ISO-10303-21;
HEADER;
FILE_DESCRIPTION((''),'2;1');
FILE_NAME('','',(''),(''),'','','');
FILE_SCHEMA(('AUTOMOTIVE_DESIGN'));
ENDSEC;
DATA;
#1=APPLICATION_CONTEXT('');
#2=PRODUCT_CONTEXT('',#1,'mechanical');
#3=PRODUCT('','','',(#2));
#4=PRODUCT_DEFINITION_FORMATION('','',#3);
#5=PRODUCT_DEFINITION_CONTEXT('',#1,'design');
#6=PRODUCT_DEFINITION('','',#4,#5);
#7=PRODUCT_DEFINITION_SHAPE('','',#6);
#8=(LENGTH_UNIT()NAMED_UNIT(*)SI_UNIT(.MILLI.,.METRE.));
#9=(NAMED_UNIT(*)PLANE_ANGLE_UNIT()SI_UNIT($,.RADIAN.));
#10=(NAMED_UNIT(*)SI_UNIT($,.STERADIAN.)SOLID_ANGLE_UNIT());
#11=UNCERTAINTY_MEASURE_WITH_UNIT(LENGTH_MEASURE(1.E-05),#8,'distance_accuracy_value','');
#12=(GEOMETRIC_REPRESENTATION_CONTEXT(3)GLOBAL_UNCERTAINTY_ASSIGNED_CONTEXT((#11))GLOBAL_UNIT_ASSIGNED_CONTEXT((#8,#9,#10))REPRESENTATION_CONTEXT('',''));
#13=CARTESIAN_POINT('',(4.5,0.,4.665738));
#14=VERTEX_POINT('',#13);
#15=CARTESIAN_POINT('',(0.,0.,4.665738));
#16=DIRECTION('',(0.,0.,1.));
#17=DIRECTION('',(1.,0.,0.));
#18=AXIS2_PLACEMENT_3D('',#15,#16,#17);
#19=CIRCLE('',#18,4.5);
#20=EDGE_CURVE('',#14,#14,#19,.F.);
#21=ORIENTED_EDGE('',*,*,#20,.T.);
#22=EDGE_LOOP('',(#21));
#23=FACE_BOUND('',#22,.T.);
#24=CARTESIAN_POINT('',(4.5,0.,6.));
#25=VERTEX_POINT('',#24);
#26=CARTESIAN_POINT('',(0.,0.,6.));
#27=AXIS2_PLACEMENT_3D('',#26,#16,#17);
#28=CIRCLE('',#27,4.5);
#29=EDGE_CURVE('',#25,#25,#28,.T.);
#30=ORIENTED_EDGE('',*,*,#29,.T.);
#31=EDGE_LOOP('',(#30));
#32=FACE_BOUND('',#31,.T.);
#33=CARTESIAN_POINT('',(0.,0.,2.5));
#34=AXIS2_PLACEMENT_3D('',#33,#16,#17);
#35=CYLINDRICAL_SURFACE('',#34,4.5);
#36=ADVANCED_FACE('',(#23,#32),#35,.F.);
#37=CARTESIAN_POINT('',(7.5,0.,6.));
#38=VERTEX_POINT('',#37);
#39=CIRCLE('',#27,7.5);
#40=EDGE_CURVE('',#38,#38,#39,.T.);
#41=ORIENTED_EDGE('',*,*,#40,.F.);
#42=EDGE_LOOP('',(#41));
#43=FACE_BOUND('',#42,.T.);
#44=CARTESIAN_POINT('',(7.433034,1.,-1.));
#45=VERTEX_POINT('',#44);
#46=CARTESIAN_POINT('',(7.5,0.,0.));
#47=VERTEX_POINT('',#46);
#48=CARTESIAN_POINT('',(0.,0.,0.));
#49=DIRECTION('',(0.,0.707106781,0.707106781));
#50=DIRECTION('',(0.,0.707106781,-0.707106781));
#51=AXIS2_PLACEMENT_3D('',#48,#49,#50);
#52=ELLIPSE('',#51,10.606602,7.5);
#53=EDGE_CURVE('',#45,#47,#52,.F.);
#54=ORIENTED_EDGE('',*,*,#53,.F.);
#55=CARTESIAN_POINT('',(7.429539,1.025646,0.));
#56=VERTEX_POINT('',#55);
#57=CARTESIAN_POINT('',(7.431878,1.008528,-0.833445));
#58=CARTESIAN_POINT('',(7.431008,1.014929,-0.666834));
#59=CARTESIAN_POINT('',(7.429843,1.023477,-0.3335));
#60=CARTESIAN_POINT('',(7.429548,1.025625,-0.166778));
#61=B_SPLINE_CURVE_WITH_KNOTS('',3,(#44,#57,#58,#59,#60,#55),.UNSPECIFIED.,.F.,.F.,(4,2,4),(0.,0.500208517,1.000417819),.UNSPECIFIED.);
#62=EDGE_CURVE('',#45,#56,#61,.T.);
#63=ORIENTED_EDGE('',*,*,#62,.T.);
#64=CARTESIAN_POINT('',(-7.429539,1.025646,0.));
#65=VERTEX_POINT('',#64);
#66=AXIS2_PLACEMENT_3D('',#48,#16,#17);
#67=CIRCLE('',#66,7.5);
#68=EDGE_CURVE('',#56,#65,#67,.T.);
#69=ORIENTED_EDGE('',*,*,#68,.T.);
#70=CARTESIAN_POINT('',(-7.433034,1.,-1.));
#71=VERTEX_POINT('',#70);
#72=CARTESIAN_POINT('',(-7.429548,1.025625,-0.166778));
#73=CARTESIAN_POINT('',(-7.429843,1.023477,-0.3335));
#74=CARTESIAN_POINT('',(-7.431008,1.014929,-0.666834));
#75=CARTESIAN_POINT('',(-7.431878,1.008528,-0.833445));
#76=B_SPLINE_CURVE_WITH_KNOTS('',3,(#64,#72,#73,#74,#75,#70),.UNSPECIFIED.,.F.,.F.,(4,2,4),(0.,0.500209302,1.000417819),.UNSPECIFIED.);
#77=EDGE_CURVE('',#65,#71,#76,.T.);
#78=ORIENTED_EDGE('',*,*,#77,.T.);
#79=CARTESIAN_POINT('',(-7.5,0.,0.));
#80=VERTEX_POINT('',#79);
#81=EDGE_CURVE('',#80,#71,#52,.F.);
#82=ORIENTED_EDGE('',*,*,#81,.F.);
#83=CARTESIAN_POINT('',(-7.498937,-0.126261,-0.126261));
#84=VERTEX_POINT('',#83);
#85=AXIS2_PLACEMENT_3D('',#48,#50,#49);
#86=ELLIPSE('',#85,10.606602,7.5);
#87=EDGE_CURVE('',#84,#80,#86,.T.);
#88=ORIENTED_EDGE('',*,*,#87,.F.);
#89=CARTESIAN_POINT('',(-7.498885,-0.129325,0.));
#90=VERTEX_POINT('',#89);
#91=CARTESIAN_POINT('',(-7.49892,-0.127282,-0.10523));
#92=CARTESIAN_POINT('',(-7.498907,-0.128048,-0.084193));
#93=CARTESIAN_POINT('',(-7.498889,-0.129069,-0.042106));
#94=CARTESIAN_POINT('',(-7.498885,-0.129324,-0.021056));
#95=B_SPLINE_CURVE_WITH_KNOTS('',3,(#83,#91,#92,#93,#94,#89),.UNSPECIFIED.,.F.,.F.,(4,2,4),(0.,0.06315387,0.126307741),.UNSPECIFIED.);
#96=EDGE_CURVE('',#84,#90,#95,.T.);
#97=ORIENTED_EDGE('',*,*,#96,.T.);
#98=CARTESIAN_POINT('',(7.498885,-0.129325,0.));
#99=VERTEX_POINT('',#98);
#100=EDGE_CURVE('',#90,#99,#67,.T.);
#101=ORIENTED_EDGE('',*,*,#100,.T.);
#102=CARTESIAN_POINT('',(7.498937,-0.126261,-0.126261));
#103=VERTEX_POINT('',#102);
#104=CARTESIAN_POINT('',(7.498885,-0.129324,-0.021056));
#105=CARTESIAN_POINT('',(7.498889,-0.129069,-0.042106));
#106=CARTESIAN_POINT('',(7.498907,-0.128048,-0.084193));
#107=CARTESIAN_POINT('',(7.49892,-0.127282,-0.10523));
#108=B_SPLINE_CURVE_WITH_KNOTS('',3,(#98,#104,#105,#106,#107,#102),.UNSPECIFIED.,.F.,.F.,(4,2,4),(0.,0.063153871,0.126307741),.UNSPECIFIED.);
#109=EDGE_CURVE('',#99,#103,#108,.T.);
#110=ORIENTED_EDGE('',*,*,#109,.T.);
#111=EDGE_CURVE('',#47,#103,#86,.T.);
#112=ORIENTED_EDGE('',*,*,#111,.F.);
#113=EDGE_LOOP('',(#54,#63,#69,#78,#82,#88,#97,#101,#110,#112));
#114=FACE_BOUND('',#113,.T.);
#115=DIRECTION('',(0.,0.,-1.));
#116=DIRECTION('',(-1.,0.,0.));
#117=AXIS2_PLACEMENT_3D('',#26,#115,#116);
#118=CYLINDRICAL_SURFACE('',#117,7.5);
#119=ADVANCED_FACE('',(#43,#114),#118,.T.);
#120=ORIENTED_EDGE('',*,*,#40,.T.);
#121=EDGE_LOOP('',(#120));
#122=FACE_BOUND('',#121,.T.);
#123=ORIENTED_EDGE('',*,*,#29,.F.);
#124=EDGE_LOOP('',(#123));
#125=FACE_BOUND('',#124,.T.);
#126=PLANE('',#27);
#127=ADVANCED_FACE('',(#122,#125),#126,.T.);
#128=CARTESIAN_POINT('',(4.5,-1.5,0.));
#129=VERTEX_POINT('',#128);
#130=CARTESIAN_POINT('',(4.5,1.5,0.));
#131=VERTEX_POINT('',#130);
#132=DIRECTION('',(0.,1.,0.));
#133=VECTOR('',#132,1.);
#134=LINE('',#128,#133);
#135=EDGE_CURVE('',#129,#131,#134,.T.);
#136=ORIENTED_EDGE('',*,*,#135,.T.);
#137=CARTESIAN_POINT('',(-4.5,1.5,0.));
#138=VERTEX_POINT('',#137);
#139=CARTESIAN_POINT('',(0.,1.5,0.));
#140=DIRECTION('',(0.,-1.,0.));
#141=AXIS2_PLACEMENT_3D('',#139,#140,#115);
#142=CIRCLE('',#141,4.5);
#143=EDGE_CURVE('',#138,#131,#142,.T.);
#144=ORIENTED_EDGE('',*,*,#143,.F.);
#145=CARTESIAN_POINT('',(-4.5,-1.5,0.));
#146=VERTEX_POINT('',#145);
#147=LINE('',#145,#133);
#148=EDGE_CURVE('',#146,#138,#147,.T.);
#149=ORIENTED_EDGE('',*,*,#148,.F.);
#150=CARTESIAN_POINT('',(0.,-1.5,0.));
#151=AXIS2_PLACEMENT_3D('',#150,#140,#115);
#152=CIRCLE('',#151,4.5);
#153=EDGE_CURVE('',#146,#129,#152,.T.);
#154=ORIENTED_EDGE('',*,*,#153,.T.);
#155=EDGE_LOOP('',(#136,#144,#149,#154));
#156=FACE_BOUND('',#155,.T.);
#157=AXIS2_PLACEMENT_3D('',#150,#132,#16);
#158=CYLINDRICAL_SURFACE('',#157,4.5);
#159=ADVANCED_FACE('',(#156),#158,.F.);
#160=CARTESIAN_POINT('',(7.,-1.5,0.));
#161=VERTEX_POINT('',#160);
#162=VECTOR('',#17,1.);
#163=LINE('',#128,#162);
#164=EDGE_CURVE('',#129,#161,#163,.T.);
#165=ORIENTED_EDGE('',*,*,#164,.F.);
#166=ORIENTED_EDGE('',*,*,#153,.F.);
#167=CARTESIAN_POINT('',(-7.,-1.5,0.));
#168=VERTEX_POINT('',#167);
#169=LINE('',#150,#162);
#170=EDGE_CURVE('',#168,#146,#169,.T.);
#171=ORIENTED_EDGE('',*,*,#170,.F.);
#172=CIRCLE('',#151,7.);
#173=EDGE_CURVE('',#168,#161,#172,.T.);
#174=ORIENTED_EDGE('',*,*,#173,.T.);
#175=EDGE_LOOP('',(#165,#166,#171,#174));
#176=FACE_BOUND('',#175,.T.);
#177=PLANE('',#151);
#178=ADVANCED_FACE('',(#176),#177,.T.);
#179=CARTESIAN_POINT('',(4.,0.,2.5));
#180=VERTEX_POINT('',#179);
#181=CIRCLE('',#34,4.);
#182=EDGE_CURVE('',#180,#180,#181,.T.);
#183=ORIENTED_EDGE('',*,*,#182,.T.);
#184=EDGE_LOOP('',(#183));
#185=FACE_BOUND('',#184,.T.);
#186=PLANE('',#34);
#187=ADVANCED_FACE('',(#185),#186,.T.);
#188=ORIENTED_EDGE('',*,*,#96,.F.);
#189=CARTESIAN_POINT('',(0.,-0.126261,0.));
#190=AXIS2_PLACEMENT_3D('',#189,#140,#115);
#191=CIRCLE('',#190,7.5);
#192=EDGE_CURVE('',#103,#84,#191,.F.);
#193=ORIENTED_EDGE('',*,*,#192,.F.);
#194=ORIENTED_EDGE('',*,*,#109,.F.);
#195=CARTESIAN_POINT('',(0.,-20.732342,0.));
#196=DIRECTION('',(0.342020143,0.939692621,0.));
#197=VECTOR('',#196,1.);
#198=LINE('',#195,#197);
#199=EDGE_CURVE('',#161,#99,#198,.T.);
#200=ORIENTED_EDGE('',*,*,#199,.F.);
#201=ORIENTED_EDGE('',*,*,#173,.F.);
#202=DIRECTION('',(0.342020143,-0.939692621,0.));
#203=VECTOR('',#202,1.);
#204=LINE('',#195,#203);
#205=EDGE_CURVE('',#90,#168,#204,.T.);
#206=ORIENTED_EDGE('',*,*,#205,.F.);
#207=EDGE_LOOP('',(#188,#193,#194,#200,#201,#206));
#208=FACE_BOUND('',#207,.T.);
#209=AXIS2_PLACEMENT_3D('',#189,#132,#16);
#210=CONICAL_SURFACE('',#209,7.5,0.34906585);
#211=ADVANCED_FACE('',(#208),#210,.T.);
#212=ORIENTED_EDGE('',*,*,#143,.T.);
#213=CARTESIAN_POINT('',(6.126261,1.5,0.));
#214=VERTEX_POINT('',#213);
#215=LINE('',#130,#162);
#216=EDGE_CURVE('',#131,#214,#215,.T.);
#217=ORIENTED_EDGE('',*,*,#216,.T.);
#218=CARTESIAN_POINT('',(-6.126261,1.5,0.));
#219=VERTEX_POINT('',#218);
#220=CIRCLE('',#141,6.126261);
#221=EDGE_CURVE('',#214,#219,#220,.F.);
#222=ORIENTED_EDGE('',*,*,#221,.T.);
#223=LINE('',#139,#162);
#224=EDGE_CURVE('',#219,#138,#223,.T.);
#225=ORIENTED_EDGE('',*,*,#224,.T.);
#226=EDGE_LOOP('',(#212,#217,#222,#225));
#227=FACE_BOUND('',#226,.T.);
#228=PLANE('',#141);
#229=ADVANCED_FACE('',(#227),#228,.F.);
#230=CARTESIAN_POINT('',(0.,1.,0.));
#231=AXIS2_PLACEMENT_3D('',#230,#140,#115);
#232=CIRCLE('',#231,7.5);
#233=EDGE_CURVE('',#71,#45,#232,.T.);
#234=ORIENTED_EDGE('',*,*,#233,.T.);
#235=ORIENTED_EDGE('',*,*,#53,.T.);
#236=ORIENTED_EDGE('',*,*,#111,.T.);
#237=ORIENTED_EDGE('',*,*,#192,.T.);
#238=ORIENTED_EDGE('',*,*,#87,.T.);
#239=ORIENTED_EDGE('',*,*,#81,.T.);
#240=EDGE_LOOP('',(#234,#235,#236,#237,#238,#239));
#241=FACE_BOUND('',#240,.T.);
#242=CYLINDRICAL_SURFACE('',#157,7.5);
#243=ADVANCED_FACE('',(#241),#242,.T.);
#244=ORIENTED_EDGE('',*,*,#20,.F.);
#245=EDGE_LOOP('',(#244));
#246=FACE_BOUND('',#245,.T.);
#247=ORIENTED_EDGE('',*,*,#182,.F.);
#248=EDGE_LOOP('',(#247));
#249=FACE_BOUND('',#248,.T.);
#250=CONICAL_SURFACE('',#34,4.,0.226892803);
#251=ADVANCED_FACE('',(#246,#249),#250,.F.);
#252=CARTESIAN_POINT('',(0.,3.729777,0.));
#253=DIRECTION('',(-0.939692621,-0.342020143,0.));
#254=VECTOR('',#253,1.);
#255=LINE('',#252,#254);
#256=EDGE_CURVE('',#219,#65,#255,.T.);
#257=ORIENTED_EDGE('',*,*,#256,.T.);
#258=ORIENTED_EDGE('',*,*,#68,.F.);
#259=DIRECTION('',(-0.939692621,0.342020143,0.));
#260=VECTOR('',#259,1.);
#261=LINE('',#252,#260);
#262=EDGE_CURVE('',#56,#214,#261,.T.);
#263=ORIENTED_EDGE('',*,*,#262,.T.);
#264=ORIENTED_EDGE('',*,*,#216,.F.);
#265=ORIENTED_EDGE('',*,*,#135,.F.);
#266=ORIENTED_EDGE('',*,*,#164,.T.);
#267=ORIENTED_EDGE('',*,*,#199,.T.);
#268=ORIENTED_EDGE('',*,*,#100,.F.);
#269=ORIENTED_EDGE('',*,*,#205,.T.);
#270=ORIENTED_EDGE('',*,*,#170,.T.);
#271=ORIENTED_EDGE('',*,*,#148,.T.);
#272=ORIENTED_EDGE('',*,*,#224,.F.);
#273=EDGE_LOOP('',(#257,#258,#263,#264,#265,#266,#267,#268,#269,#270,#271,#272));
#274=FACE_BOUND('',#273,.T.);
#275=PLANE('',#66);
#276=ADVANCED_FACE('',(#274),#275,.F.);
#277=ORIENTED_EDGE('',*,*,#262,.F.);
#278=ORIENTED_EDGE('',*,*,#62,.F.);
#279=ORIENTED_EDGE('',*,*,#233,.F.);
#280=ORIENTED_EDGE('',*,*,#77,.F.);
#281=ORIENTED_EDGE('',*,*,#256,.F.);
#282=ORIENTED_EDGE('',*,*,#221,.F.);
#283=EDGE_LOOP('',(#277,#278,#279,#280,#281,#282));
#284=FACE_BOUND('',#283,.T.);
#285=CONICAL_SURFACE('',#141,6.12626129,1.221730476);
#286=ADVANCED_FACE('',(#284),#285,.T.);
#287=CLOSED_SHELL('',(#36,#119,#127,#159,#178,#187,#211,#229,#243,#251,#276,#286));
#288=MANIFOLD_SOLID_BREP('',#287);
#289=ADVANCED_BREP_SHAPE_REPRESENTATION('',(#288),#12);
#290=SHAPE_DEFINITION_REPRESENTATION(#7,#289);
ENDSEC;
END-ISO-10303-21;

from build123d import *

# Parameters (mm, degrees)
SKETCH1_R                = 7.5
BOSS_EXTRUDE1_DEPTH      = 6
SKETCH2_R                = 4.5
CUT_EXTRUDE1_DEPTH       = 3.5
CHAMFER1_SIZE            = 0.5
CHAMFER1_SIZE2           = 2.165737937
BOSS_EXTRUDE2_DEPTH      = 1.5
BOSS_EXTRUDE2_DEPTH_BACK = 1.5
SKETCH4_OUTSIDE_W        = 22.028
SKETCH4_OUTSIDE_H        = 22.028
SKETCH4_OUTSIDE_R        = 7.5
CUT_EXTRUDE2_DEPTH       = 13.990381057
CHAMFER3_SIZE            = 1.37373871
CHAMFER3_SIZE_2          = 0.5


with BuildPart() as part:
    # Sketch1 → Boss-Extrude1 (new body)
    with BuildSketch(Plane.XY):
        Circle(SKETCH1_R)
    extrude(amount=BOSS_EXTRUDE1_DEPTH)

    # Sketch2 → Cut-Extrude1 (cut)
    with BuildSketch(Plane.XY.offset(6)):
        Circle(SKETCH2_R)
    extrude(amount=-CUT_EXTRUDE1_DEPTH, mode=Mode.SUBTRACT)

    # Chamfer1
    chamfer1_edges = [part.edges().sort_by_distance(p)[0] for p in [
        (-4.5, 0, 2.5),
    ]]
    chamfer1_side = [part.faces().sort_by_distance(p)[0] for p in [
        (0, 0, 2.5),
    ]]
    chamfer(chamfer1_edges, length=CHAMFER1_SIZE, length2=CHAMFER1_SIZE2, reference=chamfer1_side[0])

    # Sketch3 → Boss-Extrude2 (add, two sides: drawn at the far end of the back side and taken through both)
    with BuildSketch(Plane(origin=(0, 0, 0), x_dir=(1, 0, 0), z_dir=(0, 1, 0)).offset(-BOSS_EXTRUDE2_DEPTH_BACK)):
        with BuildLine():
            Line((-7.5, 0), (-4.5, 0))
            ThreePointArc((-4.5, 0), (0, 4.5), (4.5, 0))
            Line((4.5, 0), (7.5, 0))
            ThreePointArc((7.5, 0), (0, 7.5), (-7.5, 0))
        make_face()
    extrude(amount=BOSS_EXTRUDE2_DEPTH + BOSS_EXTRUDE2_DEPTH_BACK)

    # Sketch4 outside → Cut-Extrude2 (cut, through all)
    with BuildSketch(Plane.XY):
        Rectangle(SKETCH4_OUTSIDE_W, SKETCH4_OUTSIDE_H)
        Circle(SKETCH4_OUTSIDE_R, mode=Mode.SUBTRACT)
    extrude(amount=-CUT_EXTRUDE2_DEPTH, mode=Mode.SUBTRACT)

    # Chamfer3
    # the kernel refuses this chamfer: 1.37373871, 0.5 mm, written as the material it takes off along each edge
    with BuildSketch(Plane(origin=(0, -1.5, 0), x_dir=(0.9625909817516988, 0, 0.27095867184923395), z_dir=(-0.27095867184923395, 0, 0.9625909817516988))) as chamfer3_piece_1_section:
        Polygon((7.5, CHAMFER3_SIZE), (7.5 - CHAMFER3_SIZE_2, 0), (7.5, 0), align=None)
    chamfer3_piece_1 = revolve(axis=Axis((0, -1.5, 0), (0, 1, 0)), revolution_arc=211.442642735, mode=Mode.PRIVATE)
    chamfer3_piece_1 = split(chamfer3_piece_1, bisect_by=Plane(origin=(0, -0.82033622, 0), z_dir=(0, 0, -1)), keep=Keep.TOP, mode=Mode.PRIVATE)
    add(chamfer3_piece_1, mode=Mode.SUBTRACT)
    with BuildSketch(Plane(origin=(0, 1.5, 0), x_dir=(0.9625909817516987, 0, 0.2709586718492343), z_dir=(-0.2709586718492343, 0, 0.9625909817516987))) as chamfer3_piece_2_section:
        Polygon((7.5 - CHAMFER3_SIZE, 0), (7.5, -CHAMFER3_SIZE_2), (7.5, 0), align=None)
    chamfer3_piece_2 = revolve(axis=Axis((0, 1.5, 0), (0, 1, 0)), revolution_arc=211.442642735, mode=Mode.PRIVATE)
    chamfer3_piece_2 = split(chamfer3_piece_2, bisect_by=Plane(origin=(0, 1.269508832, 0), z_dir=(0, 0, -1)), keep=Keep.TOP, mode=Mode.PRIVATE)
    add(chamfer3_piece_2, mode=Mode.SUBTRACT)


solid = part.part
